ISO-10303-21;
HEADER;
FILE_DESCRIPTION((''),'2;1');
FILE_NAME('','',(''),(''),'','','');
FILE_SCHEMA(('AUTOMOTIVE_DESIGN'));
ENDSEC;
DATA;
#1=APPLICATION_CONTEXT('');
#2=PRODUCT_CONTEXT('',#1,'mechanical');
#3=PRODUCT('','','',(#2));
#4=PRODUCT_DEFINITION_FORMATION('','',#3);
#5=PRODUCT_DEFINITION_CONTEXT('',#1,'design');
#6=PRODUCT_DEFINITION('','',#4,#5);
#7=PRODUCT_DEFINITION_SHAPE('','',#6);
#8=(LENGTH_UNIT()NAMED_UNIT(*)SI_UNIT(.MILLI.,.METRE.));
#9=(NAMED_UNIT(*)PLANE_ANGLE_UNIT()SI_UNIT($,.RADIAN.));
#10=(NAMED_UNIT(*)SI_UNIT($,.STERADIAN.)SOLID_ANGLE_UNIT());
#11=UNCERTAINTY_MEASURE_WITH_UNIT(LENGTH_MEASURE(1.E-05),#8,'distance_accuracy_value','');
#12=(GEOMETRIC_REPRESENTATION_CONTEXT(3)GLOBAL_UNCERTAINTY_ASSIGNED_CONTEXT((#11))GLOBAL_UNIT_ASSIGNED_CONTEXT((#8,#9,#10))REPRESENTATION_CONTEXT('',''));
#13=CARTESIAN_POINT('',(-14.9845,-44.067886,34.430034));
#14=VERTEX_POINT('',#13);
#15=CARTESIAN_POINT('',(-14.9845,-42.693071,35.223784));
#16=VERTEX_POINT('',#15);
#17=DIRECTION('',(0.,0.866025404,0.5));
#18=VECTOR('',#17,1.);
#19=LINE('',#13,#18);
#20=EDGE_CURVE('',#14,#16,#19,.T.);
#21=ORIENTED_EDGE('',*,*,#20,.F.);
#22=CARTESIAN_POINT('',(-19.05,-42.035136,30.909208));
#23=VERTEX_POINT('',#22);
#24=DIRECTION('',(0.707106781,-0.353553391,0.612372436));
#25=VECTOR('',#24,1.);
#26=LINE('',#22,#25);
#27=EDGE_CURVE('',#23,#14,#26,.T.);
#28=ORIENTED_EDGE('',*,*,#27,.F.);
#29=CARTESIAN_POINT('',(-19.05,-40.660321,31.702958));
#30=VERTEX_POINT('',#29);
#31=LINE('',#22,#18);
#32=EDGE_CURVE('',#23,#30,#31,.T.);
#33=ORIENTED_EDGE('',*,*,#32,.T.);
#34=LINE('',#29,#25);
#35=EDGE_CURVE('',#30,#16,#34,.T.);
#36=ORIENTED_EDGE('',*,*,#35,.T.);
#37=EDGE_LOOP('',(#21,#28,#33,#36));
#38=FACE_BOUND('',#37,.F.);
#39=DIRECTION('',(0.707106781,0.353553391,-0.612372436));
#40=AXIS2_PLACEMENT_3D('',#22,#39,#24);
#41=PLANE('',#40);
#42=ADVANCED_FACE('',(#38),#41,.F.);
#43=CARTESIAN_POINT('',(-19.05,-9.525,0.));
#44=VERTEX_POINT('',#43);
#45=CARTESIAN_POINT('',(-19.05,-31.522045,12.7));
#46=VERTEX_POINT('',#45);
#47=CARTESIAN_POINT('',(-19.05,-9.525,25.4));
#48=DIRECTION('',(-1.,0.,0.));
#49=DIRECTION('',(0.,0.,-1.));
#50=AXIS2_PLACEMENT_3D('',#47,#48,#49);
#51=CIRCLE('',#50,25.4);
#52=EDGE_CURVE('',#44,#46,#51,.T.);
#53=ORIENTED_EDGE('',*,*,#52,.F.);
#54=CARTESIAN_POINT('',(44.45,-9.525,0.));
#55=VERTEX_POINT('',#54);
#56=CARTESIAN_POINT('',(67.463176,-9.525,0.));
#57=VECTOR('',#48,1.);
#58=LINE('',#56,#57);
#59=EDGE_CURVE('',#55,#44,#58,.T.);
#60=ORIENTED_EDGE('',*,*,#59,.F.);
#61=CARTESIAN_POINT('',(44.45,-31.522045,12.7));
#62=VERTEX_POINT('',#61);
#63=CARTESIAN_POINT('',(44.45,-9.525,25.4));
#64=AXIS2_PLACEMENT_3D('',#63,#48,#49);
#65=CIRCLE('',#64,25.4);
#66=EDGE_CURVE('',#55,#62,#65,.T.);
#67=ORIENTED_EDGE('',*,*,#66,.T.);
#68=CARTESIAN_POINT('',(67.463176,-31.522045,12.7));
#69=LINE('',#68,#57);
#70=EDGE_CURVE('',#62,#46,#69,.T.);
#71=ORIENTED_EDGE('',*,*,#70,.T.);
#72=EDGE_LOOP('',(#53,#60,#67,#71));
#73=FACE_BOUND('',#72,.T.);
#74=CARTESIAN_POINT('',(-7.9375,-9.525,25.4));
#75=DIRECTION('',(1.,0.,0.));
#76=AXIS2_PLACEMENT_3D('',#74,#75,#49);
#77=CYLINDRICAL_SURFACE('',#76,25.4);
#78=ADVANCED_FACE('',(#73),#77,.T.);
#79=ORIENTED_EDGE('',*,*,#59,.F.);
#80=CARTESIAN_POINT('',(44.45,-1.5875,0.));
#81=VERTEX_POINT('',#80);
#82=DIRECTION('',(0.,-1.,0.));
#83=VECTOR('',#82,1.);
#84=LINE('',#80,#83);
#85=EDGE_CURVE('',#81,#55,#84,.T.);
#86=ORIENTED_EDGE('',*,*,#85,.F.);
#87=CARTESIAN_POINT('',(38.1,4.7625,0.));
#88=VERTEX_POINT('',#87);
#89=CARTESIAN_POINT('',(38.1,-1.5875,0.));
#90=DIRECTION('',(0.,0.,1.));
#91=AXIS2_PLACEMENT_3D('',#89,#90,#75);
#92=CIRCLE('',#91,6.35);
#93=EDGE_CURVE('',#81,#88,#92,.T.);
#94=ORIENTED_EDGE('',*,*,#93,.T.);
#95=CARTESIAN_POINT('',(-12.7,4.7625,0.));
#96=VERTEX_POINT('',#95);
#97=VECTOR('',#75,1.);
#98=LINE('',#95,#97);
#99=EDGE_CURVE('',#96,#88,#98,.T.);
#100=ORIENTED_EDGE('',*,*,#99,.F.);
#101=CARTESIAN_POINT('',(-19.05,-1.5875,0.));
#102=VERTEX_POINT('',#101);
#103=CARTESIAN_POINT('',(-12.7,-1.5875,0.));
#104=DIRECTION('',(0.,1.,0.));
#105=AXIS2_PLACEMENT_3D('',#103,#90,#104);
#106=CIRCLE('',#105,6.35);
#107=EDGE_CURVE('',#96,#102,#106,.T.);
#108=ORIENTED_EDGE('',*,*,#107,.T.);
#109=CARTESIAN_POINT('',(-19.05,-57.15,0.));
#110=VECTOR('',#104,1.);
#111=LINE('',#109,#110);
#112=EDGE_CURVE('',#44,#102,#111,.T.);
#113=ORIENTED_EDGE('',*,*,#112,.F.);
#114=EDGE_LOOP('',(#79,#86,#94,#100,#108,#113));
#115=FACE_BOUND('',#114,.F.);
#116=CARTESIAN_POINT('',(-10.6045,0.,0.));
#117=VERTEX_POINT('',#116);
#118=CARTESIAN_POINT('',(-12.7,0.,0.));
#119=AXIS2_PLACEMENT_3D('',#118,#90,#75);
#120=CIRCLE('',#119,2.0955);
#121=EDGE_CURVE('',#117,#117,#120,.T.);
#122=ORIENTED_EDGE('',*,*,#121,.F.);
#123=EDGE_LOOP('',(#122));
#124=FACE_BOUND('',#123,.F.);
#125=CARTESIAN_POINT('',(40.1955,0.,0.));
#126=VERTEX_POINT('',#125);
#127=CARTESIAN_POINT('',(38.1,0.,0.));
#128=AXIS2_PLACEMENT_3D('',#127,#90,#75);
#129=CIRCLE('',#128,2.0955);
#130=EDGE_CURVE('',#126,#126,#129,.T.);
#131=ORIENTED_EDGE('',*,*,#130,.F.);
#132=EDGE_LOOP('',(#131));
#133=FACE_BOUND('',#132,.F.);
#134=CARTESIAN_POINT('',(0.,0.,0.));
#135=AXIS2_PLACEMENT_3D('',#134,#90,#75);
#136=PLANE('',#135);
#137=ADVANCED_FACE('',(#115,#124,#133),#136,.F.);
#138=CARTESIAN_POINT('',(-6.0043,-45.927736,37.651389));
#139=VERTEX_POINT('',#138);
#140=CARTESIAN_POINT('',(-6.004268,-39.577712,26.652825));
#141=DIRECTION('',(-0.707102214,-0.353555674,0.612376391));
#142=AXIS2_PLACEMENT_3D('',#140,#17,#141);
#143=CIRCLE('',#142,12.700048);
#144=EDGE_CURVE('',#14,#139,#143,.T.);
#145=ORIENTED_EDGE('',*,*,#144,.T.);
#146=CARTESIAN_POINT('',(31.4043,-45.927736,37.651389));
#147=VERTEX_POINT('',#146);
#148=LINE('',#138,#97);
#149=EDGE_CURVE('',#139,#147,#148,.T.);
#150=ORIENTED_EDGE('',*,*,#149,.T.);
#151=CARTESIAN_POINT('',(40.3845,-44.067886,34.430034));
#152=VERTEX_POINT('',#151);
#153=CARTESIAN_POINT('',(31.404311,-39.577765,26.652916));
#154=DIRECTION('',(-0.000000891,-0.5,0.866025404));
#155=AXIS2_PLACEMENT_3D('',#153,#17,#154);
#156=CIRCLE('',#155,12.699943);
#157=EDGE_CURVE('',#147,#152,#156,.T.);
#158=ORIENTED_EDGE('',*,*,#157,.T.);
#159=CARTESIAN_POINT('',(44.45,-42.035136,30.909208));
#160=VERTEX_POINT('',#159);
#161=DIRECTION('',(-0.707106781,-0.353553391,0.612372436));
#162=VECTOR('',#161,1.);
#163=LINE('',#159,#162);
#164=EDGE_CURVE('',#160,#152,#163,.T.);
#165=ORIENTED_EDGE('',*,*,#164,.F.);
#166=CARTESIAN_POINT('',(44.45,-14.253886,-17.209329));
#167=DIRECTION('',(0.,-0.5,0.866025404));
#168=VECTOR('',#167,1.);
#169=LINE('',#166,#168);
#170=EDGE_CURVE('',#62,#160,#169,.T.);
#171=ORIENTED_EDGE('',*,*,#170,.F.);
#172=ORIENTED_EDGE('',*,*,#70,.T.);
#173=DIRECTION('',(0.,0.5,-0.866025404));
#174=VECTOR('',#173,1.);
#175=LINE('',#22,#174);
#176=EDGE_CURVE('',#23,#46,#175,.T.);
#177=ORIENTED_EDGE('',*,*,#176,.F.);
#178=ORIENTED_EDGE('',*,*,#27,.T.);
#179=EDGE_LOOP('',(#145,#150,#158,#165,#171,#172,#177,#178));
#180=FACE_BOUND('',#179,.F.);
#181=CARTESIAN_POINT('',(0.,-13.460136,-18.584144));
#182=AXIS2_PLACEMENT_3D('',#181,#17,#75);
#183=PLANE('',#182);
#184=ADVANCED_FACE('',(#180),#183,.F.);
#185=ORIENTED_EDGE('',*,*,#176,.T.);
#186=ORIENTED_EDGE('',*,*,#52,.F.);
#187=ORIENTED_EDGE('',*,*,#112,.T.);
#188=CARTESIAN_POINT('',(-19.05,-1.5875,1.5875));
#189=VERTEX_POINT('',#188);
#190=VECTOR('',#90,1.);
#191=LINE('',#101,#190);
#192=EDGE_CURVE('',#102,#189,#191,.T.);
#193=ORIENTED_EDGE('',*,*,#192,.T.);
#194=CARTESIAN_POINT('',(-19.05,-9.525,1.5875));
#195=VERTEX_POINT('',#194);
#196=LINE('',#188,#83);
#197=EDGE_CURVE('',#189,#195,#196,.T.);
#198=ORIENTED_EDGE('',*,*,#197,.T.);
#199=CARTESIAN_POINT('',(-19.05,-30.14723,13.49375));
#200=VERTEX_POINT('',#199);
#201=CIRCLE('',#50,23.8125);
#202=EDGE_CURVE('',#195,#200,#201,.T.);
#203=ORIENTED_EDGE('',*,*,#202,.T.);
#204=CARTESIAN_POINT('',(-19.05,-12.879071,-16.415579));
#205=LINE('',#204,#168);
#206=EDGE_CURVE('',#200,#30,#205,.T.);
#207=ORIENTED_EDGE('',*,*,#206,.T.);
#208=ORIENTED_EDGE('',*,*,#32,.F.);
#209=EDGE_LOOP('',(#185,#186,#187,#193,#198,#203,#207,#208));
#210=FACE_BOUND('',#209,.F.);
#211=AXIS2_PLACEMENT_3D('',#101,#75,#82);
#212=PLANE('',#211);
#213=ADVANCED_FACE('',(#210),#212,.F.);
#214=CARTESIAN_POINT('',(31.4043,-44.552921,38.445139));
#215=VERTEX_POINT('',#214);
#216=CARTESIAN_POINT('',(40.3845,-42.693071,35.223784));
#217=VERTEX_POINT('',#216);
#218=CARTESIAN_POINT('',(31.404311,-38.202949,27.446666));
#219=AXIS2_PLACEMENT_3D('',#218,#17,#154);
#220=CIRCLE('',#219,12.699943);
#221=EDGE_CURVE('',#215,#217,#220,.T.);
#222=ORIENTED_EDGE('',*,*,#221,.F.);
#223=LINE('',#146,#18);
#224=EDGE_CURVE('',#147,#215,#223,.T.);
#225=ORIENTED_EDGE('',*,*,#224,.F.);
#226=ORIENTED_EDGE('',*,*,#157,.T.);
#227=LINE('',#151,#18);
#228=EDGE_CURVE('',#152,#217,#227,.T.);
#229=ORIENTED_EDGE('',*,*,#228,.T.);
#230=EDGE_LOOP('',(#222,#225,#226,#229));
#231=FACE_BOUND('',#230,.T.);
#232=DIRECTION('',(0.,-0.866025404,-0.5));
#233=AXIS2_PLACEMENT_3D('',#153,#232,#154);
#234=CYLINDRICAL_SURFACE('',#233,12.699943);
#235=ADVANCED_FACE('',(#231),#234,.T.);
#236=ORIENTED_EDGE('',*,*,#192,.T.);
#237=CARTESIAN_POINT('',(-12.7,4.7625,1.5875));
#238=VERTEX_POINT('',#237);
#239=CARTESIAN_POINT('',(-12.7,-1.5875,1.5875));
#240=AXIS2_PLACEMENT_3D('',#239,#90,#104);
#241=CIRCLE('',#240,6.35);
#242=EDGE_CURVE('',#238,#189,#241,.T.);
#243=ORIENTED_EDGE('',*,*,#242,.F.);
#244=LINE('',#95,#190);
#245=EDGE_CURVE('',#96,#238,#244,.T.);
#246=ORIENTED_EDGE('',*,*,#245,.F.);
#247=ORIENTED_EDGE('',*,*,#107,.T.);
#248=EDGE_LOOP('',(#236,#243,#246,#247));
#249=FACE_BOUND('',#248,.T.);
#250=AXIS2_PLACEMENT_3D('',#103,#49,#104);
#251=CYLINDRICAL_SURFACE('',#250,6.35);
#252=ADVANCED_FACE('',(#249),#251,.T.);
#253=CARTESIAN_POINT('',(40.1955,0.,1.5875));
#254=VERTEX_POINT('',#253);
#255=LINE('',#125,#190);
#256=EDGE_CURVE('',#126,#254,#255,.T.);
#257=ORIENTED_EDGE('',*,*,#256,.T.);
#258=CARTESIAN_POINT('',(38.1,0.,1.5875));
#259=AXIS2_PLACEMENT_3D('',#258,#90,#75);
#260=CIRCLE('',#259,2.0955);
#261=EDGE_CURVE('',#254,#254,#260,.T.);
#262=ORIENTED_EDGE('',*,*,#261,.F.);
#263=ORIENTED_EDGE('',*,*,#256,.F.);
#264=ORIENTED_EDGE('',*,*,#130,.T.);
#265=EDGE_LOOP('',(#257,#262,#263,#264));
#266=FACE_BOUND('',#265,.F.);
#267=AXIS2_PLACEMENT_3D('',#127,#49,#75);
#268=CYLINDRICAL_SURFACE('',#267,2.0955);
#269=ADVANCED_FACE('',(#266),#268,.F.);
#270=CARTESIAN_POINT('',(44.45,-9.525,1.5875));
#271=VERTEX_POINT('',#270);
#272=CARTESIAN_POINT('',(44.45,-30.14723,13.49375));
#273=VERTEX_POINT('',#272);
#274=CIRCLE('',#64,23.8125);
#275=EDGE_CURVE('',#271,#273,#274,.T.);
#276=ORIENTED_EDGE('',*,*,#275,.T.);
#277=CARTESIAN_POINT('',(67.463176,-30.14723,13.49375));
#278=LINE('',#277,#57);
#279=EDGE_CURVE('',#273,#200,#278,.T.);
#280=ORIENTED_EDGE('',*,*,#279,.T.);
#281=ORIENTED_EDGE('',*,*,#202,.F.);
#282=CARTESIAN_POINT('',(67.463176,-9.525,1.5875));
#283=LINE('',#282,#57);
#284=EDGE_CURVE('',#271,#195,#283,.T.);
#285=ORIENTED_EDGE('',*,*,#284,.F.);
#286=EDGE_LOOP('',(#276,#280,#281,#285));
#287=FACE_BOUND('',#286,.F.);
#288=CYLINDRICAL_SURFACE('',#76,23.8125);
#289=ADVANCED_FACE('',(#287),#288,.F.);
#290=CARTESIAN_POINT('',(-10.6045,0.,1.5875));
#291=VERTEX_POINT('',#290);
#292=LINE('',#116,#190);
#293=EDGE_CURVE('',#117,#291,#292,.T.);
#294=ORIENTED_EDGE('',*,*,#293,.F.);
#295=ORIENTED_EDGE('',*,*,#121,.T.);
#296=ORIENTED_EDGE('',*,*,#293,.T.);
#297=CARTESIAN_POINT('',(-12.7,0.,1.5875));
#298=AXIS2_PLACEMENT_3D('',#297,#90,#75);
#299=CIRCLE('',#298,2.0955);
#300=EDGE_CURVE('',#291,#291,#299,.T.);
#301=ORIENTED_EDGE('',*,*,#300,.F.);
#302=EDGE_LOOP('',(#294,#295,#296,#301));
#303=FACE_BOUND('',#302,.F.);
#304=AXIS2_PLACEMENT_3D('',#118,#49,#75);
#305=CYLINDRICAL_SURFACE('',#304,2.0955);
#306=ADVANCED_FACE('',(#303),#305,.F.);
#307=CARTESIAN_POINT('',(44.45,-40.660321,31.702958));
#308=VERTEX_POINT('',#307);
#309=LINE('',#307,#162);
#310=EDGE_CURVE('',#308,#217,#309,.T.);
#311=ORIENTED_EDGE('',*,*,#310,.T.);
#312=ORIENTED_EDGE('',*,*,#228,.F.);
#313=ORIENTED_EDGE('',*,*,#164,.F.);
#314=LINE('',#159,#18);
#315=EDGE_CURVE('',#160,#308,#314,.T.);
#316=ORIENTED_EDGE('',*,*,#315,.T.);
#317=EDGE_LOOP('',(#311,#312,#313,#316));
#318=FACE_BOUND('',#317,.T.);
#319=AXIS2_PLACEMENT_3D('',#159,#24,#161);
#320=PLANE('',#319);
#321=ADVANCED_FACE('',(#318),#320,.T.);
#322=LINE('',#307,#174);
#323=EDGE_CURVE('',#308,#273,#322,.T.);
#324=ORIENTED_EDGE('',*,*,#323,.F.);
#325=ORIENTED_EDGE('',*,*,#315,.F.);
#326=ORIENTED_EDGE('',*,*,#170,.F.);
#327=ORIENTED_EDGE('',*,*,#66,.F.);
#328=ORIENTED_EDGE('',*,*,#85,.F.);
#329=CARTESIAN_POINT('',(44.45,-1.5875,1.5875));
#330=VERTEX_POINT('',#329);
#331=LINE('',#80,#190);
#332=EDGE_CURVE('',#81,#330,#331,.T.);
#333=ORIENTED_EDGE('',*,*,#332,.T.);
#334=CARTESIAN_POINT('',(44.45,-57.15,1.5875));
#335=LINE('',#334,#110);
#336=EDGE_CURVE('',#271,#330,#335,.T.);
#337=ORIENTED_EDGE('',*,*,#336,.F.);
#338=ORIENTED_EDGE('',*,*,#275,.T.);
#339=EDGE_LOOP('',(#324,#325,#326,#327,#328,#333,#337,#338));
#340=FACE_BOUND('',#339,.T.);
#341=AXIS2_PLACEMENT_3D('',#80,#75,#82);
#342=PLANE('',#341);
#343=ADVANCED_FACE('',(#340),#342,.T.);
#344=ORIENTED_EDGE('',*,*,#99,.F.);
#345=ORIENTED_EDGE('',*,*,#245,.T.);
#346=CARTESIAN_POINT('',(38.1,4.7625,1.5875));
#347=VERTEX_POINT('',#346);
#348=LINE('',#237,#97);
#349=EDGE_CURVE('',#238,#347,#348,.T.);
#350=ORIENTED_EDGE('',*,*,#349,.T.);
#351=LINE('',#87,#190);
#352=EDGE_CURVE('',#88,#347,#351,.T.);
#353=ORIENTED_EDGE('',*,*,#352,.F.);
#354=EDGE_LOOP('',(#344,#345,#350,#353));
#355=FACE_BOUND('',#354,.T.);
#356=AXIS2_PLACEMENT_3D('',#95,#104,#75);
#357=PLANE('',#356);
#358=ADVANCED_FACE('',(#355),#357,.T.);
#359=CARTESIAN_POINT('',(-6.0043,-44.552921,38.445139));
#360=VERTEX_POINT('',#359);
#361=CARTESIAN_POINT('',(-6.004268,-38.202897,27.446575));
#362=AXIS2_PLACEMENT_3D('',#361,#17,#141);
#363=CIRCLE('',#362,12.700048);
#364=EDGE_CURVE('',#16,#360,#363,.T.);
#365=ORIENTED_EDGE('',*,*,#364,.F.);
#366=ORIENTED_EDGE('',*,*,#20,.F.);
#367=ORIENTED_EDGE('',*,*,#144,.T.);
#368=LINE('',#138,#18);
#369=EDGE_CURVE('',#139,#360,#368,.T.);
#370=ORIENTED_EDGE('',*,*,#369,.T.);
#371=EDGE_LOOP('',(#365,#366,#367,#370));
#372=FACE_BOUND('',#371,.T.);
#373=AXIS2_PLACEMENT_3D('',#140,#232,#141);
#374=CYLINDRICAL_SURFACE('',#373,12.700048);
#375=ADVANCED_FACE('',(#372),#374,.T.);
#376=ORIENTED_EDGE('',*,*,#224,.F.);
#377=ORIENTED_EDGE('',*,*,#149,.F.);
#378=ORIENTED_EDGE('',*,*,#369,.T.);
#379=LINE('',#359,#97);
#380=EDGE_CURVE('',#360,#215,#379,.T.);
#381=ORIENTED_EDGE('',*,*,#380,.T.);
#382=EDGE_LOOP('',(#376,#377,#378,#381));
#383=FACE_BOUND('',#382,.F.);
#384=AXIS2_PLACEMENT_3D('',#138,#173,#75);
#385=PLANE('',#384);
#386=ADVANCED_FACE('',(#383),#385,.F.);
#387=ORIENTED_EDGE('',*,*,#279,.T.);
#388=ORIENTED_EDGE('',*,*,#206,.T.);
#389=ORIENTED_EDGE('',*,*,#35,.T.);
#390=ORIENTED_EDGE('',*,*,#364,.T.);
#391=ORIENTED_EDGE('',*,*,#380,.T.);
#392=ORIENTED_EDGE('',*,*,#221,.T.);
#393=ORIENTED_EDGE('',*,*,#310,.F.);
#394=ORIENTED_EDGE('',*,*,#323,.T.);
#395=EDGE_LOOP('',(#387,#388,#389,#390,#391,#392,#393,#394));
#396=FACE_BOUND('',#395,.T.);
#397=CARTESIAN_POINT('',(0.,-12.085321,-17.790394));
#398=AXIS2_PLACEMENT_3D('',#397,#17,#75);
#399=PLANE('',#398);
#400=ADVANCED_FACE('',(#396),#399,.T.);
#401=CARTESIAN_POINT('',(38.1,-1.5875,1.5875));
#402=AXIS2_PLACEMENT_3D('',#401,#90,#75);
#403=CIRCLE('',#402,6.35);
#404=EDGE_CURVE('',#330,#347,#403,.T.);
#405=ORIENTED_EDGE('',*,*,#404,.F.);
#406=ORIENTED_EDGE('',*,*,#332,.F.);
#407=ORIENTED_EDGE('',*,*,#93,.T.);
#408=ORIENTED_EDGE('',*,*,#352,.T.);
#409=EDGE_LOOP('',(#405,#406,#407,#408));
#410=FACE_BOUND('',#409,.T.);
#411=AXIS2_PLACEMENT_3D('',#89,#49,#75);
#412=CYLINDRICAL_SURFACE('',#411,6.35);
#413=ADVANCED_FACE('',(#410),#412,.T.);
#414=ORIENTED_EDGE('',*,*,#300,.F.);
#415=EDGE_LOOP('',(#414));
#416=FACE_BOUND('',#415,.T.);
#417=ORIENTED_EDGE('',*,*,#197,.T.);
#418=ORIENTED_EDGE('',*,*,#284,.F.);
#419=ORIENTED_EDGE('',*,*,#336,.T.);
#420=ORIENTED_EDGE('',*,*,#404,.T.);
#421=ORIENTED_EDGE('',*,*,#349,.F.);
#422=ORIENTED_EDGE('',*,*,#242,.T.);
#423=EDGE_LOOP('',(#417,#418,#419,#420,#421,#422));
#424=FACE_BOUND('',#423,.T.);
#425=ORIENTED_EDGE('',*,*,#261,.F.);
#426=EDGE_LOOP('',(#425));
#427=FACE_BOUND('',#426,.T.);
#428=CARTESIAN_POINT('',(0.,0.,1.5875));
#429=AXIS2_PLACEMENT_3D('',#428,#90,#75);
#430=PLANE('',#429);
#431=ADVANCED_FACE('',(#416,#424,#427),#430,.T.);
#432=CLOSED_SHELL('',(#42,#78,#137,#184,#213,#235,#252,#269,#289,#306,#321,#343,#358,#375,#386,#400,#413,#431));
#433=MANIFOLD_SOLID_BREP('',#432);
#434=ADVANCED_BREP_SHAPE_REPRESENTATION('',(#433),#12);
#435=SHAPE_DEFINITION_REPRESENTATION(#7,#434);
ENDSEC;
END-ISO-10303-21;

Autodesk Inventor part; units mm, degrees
ref_plane "YZ Plane" through (0, 0, 0) normal (1, 0, 0) x (0, 1, 0)
ref_plane "XZ Plane" through (0, 0, 0) normal (0, 1, 0) x (-1, 0, 0)
ref_plane "XY Plane" through (0, 0, 0) normal (0, 0, 1) x (1, 0, 0)
sketch "Sketch1" plane through (0, 0, 0) normal (0, 0, 1) x (1, 0, 0)
  line L0 (-12.7, 4.7625) -> (38.1, 4.7625)
  line L1 (-15.875, -9.525) -> (44.45, -9.525)
  line L2 (-19.05, -1.5875) -> (-19.05, -26.8352)
  line L3 (44.45, -1.5875) -> (44.45, -30.4886)
  line L4 (-19.05, -9.525) -> (-15.875, -9.525)
  arc A0 (-12.7, 4.7625) -> (-19.05, -1.5875) centre (-12.7, -1.5875) ccw
  arc A1 (44.45, -1.5875) -> (38.1, 4.7625) centre (38.1, -1.5875) ccw
  line L5 (-19.05, -26.8352) -> (-19.05, -57.15)
  line L6 (-6.0043, -64.9352) -> (31.4043, -64.9352)
  line L7 (44.45, -57.15) -> (44.45, -30.4886)
  line L8 (-19.05, -57.15) -> (-14.9845, -61.2155)
  line L9 (-19.05, -57.15) -> (-13.3006, -57.15) construction
  line L10 (44.45, -57.15) -> (40.3845, -61.2155)
  line L11 (44.45, -57.15) -> (50.1994, -57.15) construction
  arc A2 (-14.9845, -61.2155) -> (-6.0043, -64.9352) centre (-6.0043, -52.2352) ccw
  arc A3 (31.4043, -64.9352) -> (40.3845, -61.2155) centre (31.4043, -52.2352) ccw
  circle A4 centre (-12.7, 0) radius 2.0955
  circle A5 centre (38.1, 0) radius 2.0955
  point P0 (0, 0)
  point P1 (25.4, 4.7625)
  point P2 (28.575, -33.6636)
  point P3 (-19.05, 4.7625)
  point P4 (44.45, 4.7625)
  point P5 (44.45, -30.1625)
  dimension "d10" = 6.35
  dimension "d13" = 45
  dimension "d14" = 135
  dimension "d15" = 12.7
  dimension "d16" = 4.191
  dimension "d17" = 4.191
extrude "Extrusion1" add sketch "Sketch1" along normal blind 1.5875
bend part "Bend Part1" radius 25.4 angle 60 line through (-15.875, -9.525, 0) along (1, 0, 0) centre toward (0, 0, 1) moving side (0, -1, 0) both sides no
equation "\"BendRadius\" = Thickness"
equation "\"BendReliefWidth\" = Thickness"
equation "\"BendReliefDepth\" = 0.5 * Thickness"
equation "\"CornerReliefSize\" = 4 * Thickness"
equation "\"MinimumRemnant\" = 2 * Thickness"
equation "\"TransitionRadius\" = BendRadius"
equation "\"JacobiRadiusSize\" = BendRadius"
equation "\"GapSize\" = Thickness"
equation "\"Thickness\" = 1.5875"
properties part number "wedge" material "Acetal Resin, White"
